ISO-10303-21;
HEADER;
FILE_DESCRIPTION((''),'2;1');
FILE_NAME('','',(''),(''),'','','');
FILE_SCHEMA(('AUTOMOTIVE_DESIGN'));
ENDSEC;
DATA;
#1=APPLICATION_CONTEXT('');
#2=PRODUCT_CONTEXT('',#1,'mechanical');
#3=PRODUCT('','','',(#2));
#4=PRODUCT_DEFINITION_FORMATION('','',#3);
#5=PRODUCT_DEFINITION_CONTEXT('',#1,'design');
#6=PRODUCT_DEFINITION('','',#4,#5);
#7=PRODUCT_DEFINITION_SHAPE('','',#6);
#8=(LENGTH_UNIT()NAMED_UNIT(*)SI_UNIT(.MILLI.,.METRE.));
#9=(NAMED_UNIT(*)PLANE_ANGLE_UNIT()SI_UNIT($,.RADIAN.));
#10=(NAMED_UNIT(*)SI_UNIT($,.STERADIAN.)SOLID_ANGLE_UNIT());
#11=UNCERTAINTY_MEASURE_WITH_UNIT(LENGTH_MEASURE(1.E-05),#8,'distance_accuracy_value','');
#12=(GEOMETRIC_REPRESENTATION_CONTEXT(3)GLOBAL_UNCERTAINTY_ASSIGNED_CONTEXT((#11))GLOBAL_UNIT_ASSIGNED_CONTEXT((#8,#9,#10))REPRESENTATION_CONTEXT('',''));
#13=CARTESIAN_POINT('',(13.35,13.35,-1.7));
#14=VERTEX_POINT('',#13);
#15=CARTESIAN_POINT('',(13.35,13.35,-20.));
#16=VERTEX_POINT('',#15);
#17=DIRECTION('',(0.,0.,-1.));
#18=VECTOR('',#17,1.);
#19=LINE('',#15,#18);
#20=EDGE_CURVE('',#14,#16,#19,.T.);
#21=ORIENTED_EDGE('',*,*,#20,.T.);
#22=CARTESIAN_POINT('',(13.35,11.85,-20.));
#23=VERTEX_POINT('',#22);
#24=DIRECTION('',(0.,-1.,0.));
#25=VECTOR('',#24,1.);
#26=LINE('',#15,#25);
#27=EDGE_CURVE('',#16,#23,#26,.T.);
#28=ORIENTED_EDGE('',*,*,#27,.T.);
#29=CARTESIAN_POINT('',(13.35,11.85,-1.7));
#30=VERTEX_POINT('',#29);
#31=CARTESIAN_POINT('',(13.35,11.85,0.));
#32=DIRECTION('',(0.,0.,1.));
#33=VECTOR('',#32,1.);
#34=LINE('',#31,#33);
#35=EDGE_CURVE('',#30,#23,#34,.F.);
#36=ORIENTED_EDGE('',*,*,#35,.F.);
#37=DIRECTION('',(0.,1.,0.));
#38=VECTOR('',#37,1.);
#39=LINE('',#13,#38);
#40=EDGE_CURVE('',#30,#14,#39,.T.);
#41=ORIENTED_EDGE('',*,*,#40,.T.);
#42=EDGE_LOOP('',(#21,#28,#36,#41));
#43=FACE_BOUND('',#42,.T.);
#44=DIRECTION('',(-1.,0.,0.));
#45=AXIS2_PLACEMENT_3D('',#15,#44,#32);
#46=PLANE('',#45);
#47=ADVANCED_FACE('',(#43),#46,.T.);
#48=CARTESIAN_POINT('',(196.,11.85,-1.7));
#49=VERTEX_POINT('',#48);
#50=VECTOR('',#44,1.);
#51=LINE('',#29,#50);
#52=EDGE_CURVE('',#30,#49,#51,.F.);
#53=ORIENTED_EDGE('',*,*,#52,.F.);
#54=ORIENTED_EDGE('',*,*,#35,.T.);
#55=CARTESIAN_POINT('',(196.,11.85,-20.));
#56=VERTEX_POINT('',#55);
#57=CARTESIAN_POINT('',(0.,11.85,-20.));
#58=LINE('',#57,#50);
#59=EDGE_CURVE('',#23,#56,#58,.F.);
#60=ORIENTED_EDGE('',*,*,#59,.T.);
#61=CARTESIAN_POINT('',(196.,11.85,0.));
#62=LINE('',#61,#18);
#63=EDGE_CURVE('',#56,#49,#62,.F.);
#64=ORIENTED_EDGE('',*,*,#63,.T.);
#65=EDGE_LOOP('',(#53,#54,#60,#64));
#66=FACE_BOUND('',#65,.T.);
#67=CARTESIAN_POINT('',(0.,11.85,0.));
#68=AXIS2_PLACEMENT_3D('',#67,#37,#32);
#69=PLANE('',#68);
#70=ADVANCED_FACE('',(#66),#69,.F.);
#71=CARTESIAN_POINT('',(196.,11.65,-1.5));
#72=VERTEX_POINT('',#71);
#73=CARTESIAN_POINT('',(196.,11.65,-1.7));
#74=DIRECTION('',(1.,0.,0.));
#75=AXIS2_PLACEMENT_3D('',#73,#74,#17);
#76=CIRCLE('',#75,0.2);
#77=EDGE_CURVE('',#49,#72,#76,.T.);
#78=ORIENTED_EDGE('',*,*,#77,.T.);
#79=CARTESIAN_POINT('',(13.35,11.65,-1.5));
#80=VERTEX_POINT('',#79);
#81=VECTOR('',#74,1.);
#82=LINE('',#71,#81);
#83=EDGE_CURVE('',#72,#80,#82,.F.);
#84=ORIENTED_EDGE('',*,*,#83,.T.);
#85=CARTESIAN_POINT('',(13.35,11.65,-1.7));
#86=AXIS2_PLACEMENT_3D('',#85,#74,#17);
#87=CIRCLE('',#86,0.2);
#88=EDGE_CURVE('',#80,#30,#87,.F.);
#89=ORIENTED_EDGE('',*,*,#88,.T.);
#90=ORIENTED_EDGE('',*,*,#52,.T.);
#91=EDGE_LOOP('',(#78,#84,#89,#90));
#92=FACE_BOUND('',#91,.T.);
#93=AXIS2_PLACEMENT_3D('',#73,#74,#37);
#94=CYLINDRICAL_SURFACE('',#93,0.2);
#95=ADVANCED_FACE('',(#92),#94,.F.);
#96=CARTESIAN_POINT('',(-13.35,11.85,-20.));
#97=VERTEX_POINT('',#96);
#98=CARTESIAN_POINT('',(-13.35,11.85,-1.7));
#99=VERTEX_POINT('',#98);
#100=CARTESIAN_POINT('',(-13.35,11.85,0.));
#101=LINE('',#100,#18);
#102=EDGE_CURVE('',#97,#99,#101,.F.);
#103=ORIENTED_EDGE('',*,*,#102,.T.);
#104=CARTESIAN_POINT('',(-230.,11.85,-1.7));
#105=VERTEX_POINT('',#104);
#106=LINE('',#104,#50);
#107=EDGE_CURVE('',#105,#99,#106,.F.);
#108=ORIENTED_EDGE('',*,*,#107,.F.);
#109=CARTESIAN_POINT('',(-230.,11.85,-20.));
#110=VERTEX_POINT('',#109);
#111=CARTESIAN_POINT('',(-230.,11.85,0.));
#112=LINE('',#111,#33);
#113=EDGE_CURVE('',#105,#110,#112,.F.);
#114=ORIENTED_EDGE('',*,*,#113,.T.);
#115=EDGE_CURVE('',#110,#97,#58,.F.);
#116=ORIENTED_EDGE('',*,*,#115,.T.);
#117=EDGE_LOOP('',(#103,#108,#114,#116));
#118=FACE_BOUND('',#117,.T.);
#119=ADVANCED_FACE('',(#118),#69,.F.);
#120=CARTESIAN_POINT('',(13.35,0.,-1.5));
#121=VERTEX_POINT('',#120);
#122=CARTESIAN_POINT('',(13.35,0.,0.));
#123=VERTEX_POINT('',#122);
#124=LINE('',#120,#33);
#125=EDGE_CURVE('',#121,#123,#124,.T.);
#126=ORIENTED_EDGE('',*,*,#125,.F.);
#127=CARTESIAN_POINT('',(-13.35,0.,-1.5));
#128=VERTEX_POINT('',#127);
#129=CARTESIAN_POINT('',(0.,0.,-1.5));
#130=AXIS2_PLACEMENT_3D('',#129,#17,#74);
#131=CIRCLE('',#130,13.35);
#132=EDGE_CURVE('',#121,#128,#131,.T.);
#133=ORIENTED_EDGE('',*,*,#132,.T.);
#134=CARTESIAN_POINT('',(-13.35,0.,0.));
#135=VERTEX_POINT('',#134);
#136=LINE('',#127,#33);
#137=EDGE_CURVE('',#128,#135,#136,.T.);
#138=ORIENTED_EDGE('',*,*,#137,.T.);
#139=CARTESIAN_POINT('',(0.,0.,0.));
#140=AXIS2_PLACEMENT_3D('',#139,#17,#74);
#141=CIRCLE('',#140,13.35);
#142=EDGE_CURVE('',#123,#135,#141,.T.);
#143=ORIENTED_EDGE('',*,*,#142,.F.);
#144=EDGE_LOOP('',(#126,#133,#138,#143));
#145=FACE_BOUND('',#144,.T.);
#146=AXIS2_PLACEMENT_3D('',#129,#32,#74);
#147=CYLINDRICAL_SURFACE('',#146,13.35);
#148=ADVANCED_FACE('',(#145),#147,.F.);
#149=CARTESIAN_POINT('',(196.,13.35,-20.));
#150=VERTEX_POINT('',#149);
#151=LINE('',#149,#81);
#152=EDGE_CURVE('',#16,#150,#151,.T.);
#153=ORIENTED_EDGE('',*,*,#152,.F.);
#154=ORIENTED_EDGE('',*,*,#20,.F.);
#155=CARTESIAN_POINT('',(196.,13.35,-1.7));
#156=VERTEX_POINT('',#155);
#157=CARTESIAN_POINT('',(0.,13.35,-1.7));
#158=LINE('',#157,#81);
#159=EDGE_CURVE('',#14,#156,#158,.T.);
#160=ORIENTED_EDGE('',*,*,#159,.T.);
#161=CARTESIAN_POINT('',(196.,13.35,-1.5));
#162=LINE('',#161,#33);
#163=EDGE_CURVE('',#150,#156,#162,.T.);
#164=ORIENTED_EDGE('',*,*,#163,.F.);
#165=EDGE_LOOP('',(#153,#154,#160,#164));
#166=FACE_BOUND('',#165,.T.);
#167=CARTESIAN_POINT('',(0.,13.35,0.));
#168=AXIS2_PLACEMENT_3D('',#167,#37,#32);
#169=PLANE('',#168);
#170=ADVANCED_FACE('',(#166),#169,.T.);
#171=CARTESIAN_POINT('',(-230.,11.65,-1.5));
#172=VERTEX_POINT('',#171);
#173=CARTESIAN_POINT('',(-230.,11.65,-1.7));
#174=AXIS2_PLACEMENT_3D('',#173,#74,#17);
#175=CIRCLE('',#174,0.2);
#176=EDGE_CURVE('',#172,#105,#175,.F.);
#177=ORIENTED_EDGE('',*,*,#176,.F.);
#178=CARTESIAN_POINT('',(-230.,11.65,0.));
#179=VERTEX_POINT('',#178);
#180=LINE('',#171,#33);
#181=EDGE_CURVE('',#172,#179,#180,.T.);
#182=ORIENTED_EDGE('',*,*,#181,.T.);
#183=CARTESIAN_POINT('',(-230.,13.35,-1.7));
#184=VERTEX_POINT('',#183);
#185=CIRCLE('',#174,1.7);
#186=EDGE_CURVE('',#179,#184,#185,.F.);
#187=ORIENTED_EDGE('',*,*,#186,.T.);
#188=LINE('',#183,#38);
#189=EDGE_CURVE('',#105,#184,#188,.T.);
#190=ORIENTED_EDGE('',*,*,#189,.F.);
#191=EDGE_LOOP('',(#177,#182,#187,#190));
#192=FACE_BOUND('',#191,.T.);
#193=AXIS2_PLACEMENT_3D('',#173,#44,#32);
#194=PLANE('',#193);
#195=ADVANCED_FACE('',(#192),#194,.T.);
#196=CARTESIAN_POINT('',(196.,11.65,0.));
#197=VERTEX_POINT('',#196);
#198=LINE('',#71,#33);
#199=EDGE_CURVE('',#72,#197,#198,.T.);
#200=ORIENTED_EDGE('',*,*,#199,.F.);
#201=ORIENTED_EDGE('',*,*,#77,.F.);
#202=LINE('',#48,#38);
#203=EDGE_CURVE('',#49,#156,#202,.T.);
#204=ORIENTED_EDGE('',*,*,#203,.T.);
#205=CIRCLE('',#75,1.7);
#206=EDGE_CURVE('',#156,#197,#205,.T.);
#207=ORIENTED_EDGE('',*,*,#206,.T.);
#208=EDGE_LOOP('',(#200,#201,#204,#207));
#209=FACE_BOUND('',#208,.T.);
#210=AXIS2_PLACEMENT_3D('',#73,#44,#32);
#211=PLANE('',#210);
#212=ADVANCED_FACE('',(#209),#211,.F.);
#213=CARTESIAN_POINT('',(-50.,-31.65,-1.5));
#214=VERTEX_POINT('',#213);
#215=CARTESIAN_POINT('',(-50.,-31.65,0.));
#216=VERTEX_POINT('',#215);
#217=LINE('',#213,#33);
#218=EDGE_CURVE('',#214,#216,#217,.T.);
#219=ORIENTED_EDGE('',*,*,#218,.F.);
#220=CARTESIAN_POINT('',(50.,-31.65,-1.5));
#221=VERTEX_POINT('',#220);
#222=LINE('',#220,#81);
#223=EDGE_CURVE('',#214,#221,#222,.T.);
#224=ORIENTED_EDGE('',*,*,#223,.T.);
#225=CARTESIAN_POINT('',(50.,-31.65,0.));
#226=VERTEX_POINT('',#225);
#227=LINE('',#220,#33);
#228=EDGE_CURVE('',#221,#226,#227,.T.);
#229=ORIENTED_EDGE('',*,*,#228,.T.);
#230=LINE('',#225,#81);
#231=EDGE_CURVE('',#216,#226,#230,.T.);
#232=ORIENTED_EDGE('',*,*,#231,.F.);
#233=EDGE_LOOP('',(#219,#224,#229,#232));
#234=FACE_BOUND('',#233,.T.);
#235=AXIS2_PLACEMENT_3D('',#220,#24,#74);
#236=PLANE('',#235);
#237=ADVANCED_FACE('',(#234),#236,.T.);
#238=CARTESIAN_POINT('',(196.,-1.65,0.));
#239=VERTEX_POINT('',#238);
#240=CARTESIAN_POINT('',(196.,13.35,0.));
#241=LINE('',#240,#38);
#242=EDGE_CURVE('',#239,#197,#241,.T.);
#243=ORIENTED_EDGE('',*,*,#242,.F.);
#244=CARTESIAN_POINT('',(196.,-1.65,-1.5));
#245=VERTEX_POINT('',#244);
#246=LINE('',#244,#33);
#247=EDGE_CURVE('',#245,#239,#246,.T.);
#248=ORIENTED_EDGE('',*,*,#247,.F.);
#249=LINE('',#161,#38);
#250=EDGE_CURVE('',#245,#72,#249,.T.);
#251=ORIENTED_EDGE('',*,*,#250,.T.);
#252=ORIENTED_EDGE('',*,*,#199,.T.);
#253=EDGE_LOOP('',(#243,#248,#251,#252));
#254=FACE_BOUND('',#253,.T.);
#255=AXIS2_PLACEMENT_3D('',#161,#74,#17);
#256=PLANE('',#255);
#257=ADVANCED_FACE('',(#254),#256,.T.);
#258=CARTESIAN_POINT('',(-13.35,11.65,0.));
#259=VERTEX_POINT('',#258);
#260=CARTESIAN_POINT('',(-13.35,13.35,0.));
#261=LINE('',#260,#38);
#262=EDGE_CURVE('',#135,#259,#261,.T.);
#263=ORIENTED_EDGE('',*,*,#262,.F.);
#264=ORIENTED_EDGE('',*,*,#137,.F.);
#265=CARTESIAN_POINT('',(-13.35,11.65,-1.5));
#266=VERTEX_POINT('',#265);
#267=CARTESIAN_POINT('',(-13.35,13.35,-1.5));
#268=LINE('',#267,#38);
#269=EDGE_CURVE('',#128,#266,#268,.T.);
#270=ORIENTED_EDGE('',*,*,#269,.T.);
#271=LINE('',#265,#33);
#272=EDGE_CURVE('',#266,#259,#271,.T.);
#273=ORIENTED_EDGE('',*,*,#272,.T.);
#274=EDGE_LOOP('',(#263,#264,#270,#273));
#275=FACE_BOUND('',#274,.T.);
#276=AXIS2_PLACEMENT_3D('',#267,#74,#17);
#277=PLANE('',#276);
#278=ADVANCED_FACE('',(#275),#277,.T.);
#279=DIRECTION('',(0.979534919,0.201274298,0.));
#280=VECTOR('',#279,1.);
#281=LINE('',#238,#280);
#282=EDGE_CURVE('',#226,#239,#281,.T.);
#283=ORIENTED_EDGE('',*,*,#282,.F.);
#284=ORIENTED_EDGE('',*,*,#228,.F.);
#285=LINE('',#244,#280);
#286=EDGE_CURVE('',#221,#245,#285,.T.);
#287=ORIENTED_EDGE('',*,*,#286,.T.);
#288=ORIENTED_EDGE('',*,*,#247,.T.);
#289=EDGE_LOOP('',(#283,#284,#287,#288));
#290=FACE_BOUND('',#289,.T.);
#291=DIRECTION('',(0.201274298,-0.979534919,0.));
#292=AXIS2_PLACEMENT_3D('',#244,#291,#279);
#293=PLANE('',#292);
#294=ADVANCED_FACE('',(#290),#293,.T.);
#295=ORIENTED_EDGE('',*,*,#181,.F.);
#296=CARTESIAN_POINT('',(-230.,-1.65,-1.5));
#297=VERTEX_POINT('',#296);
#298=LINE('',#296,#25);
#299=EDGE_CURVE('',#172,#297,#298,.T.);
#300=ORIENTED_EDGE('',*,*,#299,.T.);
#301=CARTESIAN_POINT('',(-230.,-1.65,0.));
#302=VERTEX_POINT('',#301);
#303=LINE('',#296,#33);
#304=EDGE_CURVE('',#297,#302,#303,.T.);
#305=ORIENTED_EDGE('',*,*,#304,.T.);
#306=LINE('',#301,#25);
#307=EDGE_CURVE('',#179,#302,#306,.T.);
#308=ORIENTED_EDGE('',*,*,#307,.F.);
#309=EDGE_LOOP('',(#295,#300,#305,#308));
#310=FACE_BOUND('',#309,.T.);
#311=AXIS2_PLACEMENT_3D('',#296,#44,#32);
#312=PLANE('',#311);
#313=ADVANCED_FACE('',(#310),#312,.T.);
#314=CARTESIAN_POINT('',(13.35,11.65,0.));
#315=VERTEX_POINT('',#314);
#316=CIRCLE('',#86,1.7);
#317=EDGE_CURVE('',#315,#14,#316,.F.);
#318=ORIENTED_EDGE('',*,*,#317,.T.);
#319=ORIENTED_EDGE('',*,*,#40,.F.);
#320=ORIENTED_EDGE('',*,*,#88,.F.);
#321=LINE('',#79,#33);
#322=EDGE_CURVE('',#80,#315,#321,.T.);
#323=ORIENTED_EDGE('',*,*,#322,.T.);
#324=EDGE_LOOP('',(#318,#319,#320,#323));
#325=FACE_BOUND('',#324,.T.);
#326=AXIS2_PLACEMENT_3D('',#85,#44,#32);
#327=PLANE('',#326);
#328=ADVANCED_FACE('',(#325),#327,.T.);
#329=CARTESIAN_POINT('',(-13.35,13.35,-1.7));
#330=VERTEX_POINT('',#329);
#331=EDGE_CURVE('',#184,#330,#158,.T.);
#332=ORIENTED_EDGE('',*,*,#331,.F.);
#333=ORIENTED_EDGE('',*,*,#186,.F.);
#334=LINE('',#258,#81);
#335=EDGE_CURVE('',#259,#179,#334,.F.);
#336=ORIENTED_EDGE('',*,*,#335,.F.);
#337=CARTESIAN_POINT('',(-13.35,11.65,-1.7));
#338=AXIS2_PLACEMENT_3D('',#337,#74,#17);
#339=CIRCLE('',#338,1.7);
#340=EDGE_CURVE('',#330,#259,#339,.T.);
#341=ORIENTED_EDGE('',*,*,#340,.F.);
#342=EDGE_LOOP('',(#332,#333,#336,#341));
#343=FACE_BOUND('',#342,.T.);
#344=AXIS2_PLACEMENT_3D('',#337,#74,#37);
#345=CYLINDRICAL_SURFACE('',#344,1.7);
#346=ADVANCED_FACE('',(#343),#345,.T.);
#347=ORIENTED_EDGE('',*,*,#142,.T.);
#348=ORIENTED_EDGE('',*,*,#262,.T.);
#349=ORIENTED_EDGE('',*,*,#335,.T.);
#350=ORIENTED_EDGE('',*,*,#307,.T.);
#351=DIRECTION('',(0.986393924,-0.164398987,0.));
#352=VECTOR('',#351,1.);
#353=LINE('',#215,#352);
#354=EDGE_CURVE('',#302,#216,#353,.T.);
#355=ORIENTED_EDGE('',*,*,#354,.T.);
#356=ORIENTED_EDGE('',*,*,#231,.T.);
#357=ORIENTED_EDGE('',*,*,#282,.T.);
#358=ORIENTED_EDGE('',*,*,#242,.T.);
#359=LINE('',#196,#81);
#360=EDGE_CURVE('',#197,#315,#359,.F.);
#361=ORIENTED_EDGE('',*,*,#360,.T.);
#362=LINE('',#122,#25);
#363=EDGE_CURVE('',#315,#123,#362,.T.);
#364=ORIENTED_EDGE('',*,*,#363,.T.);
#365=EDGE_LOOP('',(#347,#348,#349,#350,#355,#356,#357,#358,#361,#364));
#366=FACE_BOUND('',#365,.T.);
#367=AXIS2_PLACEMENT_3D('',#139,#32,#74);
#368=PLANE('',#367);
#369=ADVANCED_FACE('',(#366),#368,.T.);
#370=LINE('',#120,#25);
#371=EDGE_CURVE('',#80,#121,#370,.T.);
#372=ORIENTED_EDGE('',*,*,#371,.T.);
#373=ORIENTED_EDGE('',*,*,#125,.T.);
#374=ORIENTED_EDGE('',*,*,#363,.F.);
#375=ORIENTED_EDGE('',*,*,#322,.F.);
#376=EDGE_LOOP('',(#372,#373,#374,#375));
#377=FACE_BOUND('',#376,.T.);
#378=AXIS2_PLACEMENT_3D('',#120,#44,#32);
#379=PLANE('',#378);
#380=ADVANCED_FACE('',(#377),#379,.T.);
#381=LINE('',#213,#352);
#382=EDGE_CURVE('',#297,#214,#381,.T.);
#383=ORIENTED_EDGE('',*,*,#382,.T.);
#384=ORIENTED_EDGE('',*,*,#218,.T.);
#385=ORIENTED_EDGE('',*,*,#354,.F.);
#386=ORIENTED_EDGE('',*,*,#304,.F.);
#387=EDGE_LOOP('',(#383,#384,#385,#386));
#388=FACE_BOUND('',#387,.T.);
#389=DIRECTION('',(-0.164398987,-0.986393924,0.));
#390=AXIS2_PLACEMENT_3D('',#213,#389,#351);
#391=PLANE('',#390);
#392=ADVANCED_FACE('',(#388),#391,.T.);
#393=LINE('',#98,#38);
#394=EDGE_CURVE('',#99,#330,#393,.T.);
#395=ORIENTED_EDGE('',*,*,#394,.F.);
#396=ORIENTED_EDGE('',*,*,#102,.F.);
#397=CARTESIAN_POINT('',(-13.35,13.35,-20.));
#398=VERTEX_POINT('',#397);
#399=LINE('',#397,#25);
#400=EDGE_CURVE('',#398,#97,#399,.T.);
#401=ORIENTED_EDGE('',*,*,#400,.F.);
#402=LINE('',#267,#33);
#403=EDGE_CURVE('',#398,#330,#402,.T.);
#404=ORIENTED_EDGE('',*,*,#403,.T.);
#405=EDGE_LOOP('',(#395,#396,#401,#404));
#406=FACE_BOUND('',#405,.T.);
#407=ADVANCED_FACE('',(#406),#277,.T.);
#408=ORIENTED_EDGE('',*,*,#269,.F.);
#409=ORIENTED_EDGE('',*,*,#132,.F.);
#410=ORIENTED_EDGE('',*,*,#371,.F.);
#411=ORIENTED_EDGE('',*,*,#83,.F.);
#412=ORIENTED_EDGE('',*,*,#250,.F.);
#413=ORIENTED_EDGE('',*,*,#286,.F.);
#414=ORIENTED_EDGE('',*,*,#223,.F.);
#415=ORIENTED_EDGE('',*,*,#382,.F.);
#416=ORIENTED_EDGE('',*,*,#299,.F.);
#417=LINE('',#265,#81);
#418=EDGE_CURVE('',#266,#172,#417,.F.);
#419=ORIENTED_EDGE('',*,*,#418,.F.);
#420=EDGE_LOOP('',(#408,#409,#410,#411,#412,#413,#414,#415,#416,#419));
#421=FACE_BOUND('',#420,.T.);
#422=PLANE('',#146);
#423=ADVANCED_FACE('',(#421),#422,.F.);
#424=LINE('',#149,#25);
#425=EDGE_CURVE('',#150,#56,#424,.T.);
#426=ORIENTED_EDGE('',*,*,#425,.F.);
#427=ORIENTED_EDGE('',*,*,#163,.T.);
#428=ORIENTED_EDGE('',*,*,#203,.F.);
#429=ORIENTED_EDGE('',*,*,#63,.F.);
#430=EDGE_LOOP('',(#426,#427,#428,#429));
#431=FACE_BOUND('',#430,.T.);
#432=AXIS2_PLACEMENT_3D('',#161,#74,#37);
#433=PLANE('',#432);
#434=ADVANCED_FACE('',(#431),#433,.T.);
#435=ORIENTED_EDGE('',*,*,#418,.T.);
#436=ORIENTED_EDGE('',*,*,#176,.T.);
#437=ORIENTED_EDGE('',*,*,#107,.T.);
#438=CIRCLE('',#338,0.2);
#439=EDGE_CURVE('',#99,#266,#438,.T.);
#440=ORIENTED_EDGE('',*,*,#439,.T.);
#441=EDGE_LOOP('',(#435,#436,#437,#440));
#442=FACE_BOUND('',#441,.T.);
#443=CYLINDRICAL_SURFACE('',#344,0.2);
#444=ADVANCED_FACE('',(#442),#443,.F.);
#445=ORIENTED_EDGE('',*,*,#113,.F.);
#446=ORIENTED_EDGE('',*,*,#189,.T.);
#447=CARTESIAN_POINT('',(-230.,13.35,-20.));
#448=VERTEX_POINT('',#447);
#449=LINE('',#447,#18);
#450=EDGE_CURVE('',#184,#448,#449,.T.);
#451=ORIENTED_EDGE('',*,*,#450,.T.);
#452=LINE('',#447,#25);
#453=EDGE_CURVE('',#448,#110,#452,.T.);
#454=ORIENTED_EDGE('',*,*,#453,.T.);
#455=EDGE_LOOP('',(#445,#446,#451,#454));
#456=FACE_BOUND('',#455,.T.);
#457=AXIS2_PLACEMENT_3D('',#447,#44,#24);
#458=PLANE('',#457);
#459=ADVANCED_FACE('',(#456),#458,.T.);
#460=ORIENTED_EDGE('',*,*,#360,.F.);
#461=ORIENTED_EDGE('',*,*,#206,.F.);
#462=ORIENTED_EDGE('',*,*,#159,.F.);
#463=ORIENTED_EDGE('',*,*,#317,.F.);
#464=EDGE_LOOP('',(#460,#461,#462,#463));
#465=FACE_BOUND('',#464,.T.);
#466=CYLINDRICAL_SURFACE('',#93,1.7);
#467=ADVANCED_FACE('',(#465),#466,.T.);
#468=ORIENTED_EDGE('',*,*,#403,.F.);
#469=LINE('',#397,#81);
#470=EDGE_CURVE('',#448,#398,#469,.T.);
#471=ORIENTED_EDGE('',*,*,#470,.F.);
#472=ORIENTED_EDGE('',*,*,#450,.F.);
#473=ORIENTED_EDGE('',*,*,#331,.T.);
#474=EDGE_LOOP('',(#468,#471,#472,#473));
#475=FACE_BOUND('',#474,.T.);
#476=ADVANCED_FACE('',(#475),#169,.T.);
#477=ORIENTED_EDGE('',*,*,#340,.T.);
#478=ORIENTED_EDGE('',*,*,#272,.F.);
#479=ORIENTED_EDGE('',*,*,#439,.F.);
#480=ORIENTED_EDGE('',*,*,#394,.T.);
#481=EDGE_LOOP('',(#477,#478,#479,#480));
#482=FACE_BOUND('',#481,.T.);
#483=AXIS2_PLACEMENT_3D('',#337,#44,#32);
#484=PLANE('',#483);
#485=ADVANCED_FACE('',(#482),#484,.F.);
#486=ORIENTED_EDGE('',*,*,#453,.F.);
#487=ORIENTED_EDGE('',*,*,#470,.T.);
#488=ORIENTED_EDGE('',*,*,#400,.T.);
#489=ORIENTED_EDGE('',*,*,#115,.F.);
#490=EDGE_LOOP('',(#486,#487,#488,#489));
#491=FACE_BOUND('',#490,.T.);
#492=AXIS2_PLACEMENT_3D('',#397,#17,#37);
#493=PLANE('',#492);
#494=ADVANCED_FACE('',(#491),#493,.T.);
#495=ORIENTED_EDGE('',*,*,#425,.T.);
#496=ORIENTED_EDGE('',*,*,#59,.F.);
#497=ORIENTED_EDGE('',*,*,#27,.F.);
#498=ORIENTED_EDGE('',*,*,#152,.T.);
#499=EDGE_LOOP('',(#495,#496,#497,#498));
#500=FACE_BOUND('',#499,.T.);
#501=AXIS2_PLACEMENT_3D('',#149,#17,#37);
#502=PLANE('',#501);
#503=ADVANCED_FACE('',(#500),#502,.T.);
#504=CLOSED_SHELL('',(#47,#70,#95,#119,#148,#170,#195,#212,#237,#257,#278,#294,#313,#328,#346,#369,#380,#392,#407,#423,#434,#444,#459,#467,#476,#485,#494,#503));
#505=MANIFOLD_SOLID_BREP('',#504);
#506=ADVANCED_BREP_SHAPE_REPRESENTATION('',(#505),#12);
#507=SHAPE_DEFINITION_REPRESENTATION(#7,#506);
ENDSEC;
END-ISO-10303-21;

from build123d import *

# Parameters (mm, degrees)
BASE_FLANGE1_DEPTH             = 1.5
EDGE_FLANGE1_STRIP_W           = 6.4
EDGE_FLANGE1_STRIP_H           = 1.5
EDGE_FLANGE1_STRIP_CUT_DEPTH   = 216.65
EDGE_FLANGE1_STRIP_2_W         = 6.4
EDGE_FLANGE1_STRIP_2_H         = 1.5
EDGE_FLANGE1_STRIP_CUT_2_DEPTH = 182.65
EDGE_FLANGE1_DEPTH             = 216.65
EDGE_FLANGE1_BEND_DEPTH        = 182.65


# Sheet-metal steps are written as plain solids
with BuildPart() as part:
    # Sketch1 → Base-Flange1 (new body)
    with BuildSketch(Plane.XY):
        with BuildLine():
            Line((13.35, 0), (13.35, 13.35))
            Line((13.35, 13.35), (196, 13.35))
            Line((196, 13.35), (196, -1.65))
            Line((196, -1.65), (50, -31.65))
            Line((50, -31.65), (-50, -31.65))
            Line((-50, -31.65), (-230, -1.65))
            Line((-230, -1.65), (-230, 13.35))
            Line((-230, 13.35), (-13.35, 13.35))
            Line((-13.35, 13.35), (-13.35, 0))
            ThreePointArc((-13.35, 0), (0, -13.35), (13.35, 0))
        make_face()
    extrude(amount=-BASE_FLANGE1_DEPTH)

    # Edge-Flange1 strip (across the edge) → Edge-Flange1 strip cut (cut)
    with BuildSketch(Plane(origin=(-230, 13.35, -1.5), x_dir=(0, -1, 0), z_dir=(1, 0, 0))):
        with Locations((-1.5, -0.75)):
            Rectangle(EDGE_FLANGE1_STRIP_W, EDGE_FLANGE1_STRIP_H)
    extrude(amount=EDGE_FLANGE1_STRIP_CUT_DEPTH, mode=Mode.SUBTRACT)

    # Edge-Flange1 strip 2 (across the edge) → Edge-Flange1 strip cut 2 (cut)
    with BuildSketch(Plane(origin=(13.35, 13.35, -1.5), x_dir=(0, -1, 0), z_dir=(1, 0, 0))):
        with Locations((-1.5, -0.75)):
            Rectangle(EDGE_FLANGE1_STRIP_2_W, EDGE_FLANGE1_STRIP_2_H)
    extrude(amount=EDGE_FLANGE1_STRIP_CUT_2_DEPTH, mode=Mode.SUBTRACT)

    # Edge-Flange1 section (across the edge) → Edge-Flange1 (add)
    with BuildSketch(Plane(origin=(-230, 13.35, -1.5), x_dir=(0, -1, 0), z_dir=(1, 0, 0))):
        with BuildLine():
            Line((0, 0.2), (0, 18.5))
            Line((0, 18.5), (1.5, 18.5))
            Line((1.5, 18.5), (1.5, 0.2))
            ThreePointArc((1.5, 0.2), (1.558578644, 0.058578644), (1.7, 0))
            Line((1.7, 0), (1.7, -1.5))
            ThreePointArc((1.7, -1.5), (0.497918472, -1.002081528), (0, 0.2))
        make_face()
    extrude(amount=EDGE_FLANGE1_DEPTH)

    # Edge-Flange1 section 2 (across the edge) → Edge-Flange1 bend (add)
    with BuildSketch(Plane(origin=(13.35, 13.35, -1.5), x_dir=(0, -1, 0), z_dir=(1, 0, 0))):
        with BuildLine():
            Line((0, 0.2), (0, 18.5))
            Line((0, 18.5), (1.5, 18.5))
            Line((1.5, 18.5), (1.5, 0.2))
            ThreePointArc((1.5, 0.2), (1.558578644, 0.058578644), (1.7, 0))
            Line((1.7, 0), (1.7, -1.5))
            ThreePointArc((1.7, -1.5), (0.497918472, -1.002081528), (0, 0.2))
        make_face()
    extrude(amount=EDGE_FLANGE1_BEND_DEPTH)


solid = part.part
